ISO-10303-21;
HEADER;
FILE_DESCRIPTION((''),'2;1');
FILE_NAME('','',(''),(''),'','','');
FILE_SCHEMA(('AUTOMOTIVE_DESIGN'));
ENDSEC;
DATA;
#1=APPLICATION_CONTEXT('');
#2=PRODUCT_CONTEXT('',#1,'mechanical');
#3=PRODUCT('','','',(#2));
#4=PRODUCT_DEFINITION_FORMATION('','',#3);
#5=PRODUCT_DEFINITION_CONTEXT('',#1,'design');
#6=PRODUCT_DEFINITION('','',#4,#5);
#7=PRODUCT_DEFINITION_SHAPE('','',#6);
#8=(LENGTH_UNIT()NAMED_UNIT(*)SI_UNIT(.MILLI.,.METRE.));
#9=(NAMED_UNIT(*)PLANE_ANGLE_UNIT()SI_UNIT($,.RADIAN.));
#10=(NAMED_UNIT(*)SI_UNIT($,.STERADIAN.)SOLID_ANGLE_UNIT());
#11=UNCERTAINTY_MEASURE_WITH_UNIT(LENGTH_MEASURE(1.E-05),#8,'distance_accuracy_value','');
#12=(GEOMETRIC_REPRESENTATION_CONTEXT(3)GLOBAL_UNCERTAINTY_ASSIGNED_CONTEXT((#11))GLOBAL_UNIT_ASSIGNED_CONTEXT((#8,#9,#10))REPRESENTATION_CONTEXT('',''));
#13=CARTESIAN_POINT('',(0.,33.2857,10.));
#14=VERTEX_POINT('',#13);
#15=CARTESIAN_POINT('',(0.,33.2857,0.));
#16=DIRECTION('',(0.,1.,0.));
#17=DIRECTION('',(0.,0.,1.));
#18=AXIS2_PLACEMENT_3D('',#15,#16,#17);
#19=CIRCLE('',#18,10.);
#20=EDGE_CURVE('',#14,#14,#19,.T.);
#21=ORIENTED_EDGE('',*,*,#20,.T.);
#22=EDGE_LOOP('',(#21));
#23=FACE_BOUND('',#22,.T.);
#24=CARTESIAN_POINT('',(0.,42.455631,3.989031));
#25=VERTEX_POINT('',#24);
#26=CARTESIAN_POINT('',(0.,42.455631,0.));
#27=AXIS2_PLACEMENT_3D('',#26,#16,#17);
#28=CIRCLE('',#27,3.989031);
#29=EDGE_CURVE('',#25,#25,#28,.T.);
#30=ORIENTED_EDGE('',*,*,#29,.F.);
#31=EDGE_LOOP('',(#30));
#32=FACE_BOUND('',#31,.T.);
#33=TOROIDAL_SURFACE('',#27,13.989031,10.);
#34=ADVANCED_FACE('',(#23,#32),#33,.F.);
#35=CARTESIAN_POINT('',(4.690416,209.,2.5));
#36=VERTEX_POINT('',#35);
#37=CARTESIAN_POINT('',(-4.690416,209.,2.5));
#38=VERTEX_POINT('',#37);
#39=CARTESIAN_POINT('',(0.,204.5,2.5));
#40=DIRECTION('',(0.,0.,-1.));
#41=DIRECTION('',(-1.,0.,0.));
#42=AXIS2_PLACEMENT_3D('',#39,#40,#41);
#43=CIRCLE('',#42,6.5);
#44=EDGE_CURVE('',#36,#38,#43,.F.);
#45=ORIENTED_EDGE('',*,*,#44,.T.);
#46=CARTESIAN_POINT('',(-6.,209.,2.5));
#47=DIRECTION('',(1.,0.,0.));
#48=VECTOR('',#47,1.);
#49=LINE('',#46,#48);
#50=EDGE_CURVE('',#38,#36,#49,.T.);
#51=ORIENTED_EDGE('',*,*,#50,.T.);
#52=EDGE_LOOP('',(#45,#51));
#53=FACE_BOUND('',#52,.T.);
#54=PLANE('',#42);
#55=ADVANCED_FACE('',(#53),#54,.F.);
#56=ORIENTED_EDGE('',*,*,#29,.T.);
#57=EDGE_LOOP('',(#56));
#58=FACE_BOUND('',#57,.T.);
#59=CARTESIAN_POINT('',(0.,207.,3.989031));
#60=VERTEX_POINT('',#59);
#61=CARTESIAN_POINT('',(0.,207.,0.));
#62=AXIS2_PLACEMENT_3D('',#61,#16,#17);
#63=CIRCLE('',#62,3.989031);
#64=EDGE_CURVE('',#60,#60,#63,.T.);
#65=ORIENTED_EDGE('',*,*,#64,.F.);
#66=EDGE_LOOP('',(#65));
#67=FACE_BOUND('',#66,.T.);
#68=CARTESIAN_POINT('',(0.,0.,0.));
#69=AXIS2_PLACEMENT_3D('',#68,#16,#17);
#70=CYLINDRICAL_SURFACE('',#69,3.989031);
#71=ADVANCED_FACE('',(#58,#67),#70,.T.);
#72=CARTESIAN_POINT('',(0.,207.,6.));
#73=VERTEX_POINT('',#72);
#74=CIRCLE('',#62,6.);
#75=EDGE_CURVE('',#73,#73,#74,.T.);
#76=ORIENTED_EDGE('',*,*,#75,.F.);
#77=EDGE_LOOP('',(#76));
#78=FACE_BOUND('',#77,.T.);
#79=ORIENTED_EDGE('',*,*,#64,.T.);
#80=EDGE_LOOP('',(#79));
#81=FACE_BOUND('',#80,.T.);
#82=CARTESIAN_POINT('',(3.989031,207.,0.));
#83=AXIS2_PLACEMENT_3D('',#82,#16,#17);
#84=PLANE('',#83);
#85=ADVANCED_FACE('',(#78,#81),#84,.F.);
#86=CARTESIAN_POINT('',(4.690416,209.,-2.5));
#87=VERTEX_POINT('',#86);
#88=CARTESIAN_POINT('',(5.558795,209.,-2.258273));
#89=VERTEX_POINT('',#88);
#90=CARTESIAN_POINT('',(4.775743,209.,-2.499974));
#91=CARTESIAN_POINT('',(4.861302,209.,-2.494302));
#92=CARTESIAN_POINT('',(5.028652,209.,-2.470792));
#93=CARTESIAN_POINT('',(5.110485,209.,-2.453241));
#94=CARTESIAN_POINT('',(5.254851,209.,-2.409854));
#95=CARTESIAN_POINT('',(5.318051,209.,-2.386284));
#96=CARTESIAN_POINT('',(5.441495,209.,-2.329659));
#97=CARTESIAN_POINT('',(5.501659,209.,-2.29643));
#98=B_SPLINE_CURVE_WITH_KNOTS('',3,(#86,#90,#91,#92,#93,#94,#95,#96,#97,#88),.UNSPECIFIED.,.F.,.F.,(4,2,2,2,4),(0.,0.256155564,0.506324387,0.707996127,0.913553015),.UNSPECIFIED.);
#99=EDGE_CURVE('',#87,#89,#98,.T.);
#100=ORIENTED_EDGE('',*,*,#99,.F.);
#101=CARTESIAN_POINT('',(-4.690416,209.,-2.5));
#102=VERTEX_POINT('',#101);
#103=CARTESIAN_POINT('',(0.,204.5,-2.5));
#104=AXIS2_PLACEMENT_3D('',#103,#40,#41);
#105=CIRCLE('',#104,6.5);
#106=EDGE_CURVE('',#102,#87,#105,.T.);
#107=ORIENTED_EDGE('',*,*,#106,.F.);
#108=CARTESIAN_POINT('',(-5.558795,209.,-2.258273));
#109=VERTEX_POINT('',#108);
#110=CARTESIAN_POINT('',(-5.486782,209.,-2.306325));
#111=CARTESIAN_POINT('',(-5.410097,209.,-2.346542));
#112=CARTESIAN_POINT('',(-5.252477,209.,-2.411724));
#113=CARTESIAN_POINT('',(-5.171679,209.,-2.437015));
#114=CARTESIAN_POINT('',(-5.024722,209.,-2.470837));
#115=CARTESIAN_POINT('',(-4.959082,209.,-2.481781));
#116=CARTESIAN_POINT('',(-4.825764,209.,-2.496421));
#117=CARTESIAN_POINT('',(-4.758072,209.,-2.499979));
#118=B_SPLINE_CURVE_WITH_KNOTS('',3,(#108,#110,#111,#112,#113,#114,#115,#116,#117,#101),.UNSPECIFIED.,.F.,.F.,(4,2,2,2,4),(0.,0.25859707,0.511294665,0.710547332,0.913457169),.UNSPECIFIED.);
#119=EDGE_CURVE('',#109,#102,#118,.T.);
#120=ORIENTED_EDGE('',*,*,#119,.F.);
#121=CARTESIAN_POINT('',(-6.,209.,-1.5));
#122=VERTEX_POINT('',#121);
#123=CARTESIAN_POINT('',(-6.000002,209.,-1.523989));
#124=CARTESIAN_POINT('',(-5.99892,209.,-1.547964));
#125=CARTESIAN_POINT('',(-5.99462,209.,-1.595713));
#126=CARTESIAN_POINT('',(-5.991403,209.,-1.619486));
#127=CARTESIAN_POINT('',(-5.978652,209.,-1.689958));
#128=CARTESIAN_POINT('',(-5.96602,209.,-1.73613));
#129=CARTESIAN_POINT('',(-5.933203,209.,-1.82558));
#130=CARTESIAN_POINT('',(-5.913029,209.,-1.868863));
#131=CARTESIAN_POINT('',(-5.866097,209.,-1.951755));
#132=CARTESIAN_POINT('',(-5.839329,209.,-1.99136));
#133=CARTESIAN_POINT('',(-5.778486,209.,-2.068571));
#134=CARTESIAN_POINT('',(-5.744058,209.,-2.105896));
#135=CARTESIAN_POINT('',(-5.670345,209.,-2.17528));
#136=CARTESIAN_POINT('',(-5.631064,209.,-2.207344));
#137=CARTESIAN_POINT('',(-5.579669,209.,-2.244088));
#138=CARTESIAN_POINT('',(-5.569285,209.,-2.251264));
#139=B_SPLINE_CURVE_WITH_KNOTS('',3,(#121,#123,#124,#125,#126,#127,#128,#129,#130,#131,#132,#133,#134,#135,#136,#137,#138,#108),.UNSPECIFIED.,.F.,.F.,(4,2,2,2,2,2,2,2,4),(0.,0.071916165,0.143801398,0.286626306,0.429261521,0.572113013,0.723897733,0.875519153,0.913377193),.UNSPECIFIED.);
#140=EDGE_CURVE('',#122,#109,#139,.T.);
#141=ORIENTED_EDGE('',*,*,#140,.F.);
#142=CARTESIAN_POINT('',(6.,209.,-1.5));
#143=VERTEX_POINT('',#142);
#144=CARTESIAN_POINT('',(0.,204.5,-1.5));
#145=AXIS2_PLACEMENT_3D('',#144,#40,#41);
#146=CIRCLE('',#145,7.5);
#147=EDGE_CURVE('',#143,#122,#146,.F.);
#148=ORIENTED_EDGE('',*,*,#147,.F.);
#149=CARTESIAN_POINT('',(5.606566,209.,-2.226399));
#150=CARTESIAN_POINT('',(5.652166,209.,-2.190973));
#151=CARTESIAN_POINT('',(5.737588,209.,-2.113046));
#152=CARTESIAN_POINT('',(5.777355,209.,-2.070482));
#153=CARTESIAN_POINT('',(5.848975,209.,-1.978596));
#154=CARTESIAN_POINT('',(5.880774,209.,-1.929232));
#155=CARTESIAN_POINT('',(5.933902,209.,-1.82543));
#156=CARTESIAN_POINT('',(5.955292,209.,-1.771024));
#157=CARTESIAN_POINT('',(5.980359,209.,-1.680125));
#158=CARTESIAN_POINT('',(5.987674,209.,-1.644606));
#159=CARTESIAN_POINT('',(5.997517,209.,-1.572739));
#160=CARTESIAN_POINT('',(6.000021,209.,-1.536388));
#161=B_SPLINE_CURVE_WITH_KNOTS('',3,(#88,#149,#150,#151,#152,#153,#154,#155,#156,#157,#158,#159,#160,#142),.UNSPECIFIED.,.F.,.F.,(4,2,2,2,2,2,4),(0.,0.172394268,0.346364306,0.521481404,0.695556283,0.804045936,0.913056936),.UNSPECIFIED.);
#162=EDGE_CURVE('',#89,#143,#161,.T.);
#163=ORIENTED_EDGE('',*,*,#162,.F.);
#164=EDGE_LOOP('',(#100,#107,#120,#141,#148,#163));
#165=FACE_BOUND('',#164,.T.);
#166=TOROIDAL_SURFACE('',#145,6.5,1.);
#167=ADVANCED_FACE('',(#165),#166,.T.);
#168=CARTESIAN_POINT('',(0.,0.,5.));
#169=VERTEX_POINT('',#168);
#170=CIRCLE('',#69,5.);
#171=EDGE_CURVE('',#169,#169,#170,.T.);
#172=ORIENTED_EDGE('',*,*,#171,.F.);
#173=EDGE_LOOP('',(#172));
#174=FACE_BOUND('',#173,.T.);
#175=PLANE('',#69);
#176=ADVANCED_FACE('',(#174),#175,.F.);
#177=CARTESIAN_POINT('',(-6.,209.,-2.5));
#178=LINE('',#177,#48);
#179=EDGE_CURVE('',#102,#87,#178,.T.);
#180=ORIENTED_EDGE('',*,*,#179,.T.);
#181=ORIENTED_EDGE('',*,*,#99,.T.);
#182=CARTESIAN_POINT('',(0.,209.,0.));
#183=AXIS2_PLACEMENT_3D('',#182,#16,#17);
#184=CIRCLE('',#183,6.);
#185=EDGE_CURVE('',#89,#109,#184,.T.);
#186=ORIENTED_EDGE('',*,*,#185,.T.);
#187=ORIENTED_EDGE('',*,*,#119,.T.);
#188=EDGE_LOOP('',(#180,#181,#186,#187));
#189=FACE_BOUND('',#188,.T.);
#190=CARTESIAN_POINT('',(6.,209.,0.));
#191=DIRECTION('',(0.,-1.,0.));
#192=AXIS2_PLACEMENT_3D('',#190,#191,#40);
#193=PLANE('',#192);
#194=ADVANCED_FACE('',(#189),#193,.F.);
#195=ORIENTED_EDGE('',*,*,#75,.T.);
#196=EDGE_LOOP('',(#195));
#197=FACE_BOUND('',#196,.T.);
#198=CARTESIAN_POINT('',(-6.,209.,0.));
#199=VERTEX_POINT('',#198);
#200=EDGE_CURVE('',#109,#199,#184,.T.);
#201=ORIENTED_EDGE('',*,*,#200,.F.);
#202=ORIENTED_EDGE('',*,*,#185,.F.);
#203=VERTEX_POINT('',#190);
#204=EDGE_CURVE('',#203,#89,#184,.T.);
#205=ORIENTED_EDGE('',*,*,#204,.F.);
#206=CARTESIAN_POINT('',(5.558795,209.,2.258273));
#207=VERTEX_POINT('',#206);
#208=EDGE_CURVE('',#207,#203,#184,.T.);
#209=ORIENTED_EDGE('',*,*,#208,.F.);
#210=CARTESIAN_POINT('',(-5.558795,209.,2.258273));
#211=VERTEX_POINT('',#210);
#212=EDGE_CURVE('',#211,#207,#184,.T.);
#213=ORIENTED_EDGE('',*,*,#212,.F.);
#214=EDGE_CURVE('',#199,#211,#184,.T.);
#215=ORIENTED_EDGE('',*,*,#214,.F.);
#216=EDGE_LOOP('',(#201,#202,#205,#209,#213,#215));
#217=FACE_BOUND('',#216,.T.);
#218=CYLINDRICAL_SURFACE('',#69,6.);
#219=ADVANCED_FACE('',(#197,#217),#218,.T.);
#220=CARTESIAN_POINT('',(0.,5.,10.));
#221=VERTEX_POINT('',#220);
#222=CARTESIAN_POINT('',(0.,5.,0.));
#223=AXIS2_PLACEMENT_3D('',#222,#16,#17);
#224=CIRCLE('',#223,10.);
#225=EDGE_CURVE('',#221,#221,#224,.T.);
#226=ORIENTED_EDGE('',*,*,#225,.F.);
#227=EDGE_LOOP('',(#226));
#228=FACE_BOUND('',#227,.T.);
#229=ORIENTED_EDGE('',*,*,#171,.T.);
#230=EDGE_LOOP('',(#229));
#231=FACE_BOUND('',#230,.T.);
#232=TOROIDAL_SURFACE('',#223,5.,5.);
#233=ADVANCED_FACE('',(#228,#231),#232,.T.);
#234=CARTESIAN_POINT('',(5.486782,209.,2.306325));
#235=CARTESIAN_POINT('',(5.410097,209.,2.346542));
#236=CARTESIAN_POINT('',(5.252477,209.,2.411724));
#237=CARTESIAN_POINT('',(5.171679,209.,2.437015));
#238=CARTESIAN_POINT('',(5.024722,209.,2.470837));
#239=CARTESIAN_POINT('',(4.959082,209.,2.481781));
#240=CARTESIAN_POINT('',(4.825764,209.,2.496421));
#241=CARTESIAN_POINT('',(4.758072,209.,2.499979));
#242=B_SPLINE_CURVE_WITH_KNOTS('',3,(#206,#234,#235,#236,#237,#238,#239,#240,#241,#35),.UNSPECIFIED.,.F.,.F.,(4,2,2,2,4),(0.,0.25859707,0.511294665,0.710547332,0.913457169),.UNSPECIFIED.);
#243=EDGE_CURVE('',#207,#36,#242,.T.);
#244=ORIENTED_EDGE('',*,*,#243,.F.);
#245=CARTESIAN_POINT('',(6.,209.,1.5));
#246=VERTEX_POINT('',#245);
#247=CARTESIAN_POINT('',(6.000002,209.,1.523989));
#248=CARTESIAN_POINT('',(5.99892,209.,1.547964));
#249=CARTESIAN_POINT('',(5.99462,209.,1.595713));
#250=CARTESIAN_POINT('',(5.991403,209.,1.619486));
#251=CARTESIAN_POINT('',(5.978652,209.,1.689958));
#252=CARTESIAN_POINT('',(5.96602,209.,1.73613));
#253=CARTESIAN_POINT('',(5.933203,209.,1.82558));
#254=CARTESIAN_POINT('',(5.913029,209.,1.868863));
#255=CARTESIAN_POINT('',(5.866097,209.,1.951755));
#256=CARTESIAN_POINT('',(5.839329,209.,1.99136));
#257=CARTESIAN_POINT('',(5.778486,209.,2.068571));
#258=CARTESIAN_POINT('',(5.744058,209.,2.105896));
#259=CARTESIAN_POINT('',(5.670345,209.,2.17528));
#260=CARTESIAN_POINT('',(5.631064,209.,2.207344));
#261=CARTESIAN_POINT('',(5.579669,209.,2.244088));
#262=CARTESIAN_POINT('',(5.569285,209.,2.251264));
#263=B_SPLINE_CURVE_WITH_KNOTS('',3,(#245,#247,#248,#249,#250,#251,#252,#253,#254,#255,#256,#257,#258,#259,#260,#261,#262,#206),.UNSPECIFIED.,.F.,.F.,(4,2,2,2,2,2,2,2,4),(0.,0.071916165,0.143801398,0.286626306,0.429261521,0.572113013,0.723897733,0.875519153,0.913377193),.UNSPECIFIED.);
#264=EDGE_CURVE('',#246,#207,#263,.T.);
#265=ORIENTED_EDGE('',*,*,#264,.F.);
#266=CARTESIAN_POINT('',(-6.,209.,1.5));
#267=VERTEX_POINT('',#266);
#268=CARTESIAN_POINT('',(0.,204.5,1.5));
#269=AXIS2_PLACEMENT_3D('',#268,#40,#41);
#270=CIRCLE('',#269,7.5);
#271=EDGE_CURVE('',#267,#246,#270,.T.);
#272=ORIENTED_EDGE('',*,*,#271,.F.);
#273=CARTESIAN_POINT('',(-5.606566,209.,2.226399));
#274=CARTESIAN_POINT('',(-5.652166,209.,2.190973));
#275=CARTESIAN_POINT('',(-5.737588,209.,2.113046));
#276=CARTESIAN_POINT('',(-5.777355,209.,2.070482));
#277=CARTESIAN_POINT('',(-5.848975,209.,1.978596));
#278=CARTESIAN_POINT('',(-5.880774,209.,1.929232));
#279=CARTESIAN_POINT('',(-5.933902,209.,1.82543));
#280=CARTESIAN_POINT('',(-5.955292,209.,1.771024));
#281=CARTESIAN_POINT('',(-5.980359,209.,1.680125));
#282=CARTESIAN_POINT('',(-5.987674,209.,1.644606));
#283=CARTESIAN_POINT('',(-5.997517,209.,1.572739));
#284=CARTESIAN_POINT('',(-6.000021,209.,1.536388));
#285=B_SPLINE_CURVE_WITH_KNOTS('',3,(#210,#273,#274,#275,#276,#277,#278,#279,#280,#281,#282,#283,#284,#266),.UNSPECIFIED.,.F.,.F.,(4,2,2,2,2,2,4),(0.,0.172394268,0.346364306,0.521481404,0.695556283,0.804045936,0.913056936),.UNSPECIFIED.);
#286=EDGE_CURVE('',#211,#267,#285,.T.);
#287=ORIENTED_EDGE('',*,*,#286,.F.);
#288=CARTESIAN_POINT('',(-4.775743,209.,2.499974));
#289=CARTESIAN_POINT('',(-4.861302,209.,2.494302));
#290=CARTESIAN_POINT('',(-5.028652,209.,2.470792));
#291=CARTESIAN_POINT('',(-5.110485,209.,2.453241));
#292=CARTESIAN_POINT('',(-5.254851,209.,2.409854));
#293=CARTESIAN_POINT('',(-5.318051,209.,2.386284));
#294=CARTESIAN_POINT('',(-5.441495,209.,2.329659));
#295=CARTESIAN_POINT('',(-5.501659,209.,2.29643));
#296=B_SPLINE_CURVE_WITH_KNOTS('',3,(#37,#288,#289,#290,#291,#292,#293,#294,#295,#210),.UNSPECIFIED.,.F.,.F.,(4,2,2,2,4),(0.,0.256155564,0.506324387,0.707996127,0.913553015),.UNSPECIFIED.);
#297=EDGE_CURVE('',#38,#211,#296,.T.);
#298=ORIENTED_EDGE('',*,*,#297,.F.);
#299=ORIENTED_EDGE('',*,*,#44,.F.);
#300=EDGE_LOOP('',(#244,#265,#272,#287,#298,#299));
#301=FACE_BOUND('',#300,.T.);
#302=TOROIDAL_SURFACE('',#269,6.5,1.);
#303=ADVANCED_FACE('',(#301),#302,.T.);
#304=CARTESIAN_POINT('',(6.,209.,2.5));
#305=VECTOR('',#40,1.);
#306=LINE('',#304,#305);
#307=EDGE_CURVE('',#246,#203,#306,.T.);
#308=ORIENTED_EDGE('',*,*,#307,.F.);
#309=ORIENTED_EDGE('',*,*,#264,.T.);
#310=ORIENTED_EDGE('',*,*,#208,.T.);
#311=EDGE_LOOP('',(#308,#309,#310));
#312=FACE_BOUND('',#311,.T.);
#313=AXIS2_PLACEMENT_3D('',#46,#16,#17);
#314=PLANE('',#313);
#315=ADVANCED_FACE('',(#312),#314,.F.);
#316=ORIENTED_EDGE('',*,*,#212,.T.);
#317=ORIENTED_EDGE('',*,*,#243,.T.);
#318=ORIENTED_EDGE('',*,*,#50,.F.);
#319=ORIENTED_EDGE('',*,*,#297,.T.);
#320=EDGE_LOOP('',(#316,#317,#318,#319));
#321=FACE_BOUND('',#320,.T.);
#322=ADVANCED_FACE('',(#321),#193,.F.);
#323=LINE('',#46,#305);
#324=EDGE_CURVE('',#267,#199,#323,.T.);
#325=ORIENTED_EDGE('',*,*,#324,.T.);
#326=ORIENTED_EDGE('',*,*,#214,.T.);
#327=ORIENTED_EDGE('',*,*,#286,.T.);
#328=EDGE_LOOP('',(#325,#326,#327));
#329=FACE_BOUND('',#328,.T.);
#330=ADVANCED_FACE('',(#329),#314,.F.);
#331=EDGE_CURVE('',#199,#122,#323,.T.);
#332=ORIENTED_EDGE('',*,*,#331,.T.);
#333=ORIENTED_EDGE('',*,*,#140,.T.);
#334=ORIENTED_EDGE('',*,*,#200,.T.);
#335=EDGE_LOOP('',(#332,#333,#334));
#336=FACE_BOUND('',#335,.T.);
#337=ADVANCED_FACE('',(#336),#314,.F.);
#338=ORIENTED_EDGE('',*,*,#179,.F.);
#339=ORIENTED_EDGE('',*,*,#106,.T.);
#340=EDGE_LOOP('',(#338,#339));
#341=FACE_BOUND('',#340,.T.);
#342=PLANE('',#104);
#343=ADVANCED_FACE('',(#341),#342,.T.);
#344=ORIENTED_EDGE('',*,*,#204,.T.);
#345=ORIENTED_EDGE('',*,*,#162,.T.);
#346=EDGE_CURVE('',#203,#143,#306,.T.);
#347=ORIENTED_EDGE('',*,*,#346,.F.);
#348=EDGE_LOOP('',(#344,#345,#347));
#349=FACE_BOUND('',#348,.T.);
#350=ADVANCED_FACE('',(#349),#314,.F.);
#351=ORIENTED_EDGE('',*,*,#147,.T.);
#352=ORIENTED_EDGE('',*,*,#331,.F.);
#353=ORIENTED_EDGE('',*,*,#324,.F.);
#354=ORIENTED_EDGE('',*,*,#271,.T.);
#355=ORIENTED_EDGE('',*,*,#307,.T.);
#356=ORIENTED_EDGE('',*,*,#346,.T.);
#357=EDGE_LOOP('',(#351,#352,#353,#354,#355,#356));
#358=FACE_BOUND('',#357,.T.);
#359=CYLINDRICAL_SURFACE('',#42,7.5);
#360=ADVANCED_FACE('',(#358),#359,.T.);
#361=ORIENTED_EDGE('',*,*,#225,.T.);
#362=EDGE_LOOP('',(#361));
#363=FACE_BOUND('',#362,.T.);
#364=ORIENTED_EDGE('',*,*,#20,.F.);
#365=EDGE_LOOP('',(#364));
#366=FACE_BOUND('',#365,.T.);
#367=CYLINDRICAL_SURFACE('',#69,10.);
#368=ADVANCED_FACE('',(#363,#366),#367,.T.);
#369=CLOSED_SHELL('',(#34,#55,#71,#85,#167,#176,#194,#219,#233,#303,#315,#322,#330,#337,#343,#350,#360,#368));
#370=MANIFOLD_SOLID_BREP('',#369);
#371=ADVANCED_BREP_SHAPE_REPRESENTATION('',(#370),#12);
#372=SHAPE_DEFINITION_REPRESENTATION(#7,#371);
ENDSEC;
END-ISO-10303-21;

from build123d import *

# Parameters (mm, degrees)
BOSS_EXTRUDE1_DEPTH = 2.5
FILLET1_R           = 1


with BuildPart() as part:
    # Sketch1 → Revolve1 (revolve)
    with BuildSketch(Plane.XY, mode=Mode.PRIVATE) as revolve1_sk:
        with BuildLine():
            Line((0, 0), (5, 0))
            ThreePointArc((5, 0), (8.535533906, 1.464466094), (10, 5))
            Line((10, 5), (10, 33.285700302))
            ThreePointArc((10, 33.285700302), (5.625709026, 36.973401218), (3.989031047, 42.455631126))
            Line((3.989031047, 42.455631126), (3.989031047, 207))
            Line((3.989031047, 207), (6, 207))
            Line((6, 207), (6, 209))
            Line((6, 209), (0, 209))
            Line((0, 209), (0, 0))
        make_face()
    revolve(revolve1_sk.sketch.rotate(Axis((0, 0, 0), (0, -1, 0)), 90), axis=Axis((0, 0, 0), (0, -1, 0)))

    # Sketch2 → Boss-Extrude1 (add, symmetric)
    with BuildSketch(Plane.XY):
        with BuildLine():
            Line((-6, 209), (6, 209))
            ThreePointArc((6, 209), (0, 212), (-6, 209))
        make_face()
    extrude(amount=BOSS_EXTRUDE1_DEPTH, both=True)

    # Fillet1
    # the kernel refuses this fillet: 1 mm, written as the material it takes off along each edge
    with BuildSketch(Plane(origin=(0, 204.5, -2.5), x_dir=(0.9523393361832132, 0.3050406346015508, 0), z_dir=(0.3050406346015508, -0.9523393361832132, 0))) as fillet1_piece_1_section:
        with BuildLine():
            CenterArc((7.5 - FILLET1_R, FILLET1_R), FILLET1_R, 270, 90)
            Line((7.5 - FILLET1_R, 0), (7.5, 0))
            Line((7.5, 0), (7.5, FILLET1_R))
        make_face()
    fillet1_piece_1 = revolve(axis=Axis((0, 204.5, -2.5), (0, 0, 1)), revolution_arc=144.478782805, mode=Mode.PRIVATE)
    fillet1_piece_1 = split(fillet1_piece_1, bisect_by=Plane(origin=(5.716310171, 209, -2.240967586), z_dir=(0, 1, 0)), keep=Keep.TOP, mode=Mode.PRIVATE)
    add(fillet1_piece_1, mode=Mode.SUBTRACT)
    with BuildSketch(Plane(origin=(0, 204.5, 2.5), x_dir=(0.9523393361832132, 0.3050406346015508, 0), z_dir=(0.3050406346015508, -0.9523393361832132, 0))) as fillet1_piece_2_section:
        with BuildLine():
            CenterArc((7.5 - FILLET1_R, -FILLET1_R), FILLET1_R, 0, 90)
            Line((7.5, -FILLET1_R), (7.5, 0))
            Line((7.5, 0), (7.5 - FILLET1_R, 0))
        make_face()
    fillet1_piece_2 = revolve(axis=Axis((0, 204.5, 2.5), (0, 0, 1)), revolution_arc=144.478782805, mode=Mode.PRIVATE)
    fillet1_piece_2 = split(fillet1_piece_2, bisect_by=Plane(origin=(5.71631017, 209, 2.240967722), z_dir=(0, 1, 0)), keep=Keep.TOP, mode=Mode.PRIVATE)
    add(fillet1_piece_2, mode=Mode.SUBTRACT)


solid = part.part
